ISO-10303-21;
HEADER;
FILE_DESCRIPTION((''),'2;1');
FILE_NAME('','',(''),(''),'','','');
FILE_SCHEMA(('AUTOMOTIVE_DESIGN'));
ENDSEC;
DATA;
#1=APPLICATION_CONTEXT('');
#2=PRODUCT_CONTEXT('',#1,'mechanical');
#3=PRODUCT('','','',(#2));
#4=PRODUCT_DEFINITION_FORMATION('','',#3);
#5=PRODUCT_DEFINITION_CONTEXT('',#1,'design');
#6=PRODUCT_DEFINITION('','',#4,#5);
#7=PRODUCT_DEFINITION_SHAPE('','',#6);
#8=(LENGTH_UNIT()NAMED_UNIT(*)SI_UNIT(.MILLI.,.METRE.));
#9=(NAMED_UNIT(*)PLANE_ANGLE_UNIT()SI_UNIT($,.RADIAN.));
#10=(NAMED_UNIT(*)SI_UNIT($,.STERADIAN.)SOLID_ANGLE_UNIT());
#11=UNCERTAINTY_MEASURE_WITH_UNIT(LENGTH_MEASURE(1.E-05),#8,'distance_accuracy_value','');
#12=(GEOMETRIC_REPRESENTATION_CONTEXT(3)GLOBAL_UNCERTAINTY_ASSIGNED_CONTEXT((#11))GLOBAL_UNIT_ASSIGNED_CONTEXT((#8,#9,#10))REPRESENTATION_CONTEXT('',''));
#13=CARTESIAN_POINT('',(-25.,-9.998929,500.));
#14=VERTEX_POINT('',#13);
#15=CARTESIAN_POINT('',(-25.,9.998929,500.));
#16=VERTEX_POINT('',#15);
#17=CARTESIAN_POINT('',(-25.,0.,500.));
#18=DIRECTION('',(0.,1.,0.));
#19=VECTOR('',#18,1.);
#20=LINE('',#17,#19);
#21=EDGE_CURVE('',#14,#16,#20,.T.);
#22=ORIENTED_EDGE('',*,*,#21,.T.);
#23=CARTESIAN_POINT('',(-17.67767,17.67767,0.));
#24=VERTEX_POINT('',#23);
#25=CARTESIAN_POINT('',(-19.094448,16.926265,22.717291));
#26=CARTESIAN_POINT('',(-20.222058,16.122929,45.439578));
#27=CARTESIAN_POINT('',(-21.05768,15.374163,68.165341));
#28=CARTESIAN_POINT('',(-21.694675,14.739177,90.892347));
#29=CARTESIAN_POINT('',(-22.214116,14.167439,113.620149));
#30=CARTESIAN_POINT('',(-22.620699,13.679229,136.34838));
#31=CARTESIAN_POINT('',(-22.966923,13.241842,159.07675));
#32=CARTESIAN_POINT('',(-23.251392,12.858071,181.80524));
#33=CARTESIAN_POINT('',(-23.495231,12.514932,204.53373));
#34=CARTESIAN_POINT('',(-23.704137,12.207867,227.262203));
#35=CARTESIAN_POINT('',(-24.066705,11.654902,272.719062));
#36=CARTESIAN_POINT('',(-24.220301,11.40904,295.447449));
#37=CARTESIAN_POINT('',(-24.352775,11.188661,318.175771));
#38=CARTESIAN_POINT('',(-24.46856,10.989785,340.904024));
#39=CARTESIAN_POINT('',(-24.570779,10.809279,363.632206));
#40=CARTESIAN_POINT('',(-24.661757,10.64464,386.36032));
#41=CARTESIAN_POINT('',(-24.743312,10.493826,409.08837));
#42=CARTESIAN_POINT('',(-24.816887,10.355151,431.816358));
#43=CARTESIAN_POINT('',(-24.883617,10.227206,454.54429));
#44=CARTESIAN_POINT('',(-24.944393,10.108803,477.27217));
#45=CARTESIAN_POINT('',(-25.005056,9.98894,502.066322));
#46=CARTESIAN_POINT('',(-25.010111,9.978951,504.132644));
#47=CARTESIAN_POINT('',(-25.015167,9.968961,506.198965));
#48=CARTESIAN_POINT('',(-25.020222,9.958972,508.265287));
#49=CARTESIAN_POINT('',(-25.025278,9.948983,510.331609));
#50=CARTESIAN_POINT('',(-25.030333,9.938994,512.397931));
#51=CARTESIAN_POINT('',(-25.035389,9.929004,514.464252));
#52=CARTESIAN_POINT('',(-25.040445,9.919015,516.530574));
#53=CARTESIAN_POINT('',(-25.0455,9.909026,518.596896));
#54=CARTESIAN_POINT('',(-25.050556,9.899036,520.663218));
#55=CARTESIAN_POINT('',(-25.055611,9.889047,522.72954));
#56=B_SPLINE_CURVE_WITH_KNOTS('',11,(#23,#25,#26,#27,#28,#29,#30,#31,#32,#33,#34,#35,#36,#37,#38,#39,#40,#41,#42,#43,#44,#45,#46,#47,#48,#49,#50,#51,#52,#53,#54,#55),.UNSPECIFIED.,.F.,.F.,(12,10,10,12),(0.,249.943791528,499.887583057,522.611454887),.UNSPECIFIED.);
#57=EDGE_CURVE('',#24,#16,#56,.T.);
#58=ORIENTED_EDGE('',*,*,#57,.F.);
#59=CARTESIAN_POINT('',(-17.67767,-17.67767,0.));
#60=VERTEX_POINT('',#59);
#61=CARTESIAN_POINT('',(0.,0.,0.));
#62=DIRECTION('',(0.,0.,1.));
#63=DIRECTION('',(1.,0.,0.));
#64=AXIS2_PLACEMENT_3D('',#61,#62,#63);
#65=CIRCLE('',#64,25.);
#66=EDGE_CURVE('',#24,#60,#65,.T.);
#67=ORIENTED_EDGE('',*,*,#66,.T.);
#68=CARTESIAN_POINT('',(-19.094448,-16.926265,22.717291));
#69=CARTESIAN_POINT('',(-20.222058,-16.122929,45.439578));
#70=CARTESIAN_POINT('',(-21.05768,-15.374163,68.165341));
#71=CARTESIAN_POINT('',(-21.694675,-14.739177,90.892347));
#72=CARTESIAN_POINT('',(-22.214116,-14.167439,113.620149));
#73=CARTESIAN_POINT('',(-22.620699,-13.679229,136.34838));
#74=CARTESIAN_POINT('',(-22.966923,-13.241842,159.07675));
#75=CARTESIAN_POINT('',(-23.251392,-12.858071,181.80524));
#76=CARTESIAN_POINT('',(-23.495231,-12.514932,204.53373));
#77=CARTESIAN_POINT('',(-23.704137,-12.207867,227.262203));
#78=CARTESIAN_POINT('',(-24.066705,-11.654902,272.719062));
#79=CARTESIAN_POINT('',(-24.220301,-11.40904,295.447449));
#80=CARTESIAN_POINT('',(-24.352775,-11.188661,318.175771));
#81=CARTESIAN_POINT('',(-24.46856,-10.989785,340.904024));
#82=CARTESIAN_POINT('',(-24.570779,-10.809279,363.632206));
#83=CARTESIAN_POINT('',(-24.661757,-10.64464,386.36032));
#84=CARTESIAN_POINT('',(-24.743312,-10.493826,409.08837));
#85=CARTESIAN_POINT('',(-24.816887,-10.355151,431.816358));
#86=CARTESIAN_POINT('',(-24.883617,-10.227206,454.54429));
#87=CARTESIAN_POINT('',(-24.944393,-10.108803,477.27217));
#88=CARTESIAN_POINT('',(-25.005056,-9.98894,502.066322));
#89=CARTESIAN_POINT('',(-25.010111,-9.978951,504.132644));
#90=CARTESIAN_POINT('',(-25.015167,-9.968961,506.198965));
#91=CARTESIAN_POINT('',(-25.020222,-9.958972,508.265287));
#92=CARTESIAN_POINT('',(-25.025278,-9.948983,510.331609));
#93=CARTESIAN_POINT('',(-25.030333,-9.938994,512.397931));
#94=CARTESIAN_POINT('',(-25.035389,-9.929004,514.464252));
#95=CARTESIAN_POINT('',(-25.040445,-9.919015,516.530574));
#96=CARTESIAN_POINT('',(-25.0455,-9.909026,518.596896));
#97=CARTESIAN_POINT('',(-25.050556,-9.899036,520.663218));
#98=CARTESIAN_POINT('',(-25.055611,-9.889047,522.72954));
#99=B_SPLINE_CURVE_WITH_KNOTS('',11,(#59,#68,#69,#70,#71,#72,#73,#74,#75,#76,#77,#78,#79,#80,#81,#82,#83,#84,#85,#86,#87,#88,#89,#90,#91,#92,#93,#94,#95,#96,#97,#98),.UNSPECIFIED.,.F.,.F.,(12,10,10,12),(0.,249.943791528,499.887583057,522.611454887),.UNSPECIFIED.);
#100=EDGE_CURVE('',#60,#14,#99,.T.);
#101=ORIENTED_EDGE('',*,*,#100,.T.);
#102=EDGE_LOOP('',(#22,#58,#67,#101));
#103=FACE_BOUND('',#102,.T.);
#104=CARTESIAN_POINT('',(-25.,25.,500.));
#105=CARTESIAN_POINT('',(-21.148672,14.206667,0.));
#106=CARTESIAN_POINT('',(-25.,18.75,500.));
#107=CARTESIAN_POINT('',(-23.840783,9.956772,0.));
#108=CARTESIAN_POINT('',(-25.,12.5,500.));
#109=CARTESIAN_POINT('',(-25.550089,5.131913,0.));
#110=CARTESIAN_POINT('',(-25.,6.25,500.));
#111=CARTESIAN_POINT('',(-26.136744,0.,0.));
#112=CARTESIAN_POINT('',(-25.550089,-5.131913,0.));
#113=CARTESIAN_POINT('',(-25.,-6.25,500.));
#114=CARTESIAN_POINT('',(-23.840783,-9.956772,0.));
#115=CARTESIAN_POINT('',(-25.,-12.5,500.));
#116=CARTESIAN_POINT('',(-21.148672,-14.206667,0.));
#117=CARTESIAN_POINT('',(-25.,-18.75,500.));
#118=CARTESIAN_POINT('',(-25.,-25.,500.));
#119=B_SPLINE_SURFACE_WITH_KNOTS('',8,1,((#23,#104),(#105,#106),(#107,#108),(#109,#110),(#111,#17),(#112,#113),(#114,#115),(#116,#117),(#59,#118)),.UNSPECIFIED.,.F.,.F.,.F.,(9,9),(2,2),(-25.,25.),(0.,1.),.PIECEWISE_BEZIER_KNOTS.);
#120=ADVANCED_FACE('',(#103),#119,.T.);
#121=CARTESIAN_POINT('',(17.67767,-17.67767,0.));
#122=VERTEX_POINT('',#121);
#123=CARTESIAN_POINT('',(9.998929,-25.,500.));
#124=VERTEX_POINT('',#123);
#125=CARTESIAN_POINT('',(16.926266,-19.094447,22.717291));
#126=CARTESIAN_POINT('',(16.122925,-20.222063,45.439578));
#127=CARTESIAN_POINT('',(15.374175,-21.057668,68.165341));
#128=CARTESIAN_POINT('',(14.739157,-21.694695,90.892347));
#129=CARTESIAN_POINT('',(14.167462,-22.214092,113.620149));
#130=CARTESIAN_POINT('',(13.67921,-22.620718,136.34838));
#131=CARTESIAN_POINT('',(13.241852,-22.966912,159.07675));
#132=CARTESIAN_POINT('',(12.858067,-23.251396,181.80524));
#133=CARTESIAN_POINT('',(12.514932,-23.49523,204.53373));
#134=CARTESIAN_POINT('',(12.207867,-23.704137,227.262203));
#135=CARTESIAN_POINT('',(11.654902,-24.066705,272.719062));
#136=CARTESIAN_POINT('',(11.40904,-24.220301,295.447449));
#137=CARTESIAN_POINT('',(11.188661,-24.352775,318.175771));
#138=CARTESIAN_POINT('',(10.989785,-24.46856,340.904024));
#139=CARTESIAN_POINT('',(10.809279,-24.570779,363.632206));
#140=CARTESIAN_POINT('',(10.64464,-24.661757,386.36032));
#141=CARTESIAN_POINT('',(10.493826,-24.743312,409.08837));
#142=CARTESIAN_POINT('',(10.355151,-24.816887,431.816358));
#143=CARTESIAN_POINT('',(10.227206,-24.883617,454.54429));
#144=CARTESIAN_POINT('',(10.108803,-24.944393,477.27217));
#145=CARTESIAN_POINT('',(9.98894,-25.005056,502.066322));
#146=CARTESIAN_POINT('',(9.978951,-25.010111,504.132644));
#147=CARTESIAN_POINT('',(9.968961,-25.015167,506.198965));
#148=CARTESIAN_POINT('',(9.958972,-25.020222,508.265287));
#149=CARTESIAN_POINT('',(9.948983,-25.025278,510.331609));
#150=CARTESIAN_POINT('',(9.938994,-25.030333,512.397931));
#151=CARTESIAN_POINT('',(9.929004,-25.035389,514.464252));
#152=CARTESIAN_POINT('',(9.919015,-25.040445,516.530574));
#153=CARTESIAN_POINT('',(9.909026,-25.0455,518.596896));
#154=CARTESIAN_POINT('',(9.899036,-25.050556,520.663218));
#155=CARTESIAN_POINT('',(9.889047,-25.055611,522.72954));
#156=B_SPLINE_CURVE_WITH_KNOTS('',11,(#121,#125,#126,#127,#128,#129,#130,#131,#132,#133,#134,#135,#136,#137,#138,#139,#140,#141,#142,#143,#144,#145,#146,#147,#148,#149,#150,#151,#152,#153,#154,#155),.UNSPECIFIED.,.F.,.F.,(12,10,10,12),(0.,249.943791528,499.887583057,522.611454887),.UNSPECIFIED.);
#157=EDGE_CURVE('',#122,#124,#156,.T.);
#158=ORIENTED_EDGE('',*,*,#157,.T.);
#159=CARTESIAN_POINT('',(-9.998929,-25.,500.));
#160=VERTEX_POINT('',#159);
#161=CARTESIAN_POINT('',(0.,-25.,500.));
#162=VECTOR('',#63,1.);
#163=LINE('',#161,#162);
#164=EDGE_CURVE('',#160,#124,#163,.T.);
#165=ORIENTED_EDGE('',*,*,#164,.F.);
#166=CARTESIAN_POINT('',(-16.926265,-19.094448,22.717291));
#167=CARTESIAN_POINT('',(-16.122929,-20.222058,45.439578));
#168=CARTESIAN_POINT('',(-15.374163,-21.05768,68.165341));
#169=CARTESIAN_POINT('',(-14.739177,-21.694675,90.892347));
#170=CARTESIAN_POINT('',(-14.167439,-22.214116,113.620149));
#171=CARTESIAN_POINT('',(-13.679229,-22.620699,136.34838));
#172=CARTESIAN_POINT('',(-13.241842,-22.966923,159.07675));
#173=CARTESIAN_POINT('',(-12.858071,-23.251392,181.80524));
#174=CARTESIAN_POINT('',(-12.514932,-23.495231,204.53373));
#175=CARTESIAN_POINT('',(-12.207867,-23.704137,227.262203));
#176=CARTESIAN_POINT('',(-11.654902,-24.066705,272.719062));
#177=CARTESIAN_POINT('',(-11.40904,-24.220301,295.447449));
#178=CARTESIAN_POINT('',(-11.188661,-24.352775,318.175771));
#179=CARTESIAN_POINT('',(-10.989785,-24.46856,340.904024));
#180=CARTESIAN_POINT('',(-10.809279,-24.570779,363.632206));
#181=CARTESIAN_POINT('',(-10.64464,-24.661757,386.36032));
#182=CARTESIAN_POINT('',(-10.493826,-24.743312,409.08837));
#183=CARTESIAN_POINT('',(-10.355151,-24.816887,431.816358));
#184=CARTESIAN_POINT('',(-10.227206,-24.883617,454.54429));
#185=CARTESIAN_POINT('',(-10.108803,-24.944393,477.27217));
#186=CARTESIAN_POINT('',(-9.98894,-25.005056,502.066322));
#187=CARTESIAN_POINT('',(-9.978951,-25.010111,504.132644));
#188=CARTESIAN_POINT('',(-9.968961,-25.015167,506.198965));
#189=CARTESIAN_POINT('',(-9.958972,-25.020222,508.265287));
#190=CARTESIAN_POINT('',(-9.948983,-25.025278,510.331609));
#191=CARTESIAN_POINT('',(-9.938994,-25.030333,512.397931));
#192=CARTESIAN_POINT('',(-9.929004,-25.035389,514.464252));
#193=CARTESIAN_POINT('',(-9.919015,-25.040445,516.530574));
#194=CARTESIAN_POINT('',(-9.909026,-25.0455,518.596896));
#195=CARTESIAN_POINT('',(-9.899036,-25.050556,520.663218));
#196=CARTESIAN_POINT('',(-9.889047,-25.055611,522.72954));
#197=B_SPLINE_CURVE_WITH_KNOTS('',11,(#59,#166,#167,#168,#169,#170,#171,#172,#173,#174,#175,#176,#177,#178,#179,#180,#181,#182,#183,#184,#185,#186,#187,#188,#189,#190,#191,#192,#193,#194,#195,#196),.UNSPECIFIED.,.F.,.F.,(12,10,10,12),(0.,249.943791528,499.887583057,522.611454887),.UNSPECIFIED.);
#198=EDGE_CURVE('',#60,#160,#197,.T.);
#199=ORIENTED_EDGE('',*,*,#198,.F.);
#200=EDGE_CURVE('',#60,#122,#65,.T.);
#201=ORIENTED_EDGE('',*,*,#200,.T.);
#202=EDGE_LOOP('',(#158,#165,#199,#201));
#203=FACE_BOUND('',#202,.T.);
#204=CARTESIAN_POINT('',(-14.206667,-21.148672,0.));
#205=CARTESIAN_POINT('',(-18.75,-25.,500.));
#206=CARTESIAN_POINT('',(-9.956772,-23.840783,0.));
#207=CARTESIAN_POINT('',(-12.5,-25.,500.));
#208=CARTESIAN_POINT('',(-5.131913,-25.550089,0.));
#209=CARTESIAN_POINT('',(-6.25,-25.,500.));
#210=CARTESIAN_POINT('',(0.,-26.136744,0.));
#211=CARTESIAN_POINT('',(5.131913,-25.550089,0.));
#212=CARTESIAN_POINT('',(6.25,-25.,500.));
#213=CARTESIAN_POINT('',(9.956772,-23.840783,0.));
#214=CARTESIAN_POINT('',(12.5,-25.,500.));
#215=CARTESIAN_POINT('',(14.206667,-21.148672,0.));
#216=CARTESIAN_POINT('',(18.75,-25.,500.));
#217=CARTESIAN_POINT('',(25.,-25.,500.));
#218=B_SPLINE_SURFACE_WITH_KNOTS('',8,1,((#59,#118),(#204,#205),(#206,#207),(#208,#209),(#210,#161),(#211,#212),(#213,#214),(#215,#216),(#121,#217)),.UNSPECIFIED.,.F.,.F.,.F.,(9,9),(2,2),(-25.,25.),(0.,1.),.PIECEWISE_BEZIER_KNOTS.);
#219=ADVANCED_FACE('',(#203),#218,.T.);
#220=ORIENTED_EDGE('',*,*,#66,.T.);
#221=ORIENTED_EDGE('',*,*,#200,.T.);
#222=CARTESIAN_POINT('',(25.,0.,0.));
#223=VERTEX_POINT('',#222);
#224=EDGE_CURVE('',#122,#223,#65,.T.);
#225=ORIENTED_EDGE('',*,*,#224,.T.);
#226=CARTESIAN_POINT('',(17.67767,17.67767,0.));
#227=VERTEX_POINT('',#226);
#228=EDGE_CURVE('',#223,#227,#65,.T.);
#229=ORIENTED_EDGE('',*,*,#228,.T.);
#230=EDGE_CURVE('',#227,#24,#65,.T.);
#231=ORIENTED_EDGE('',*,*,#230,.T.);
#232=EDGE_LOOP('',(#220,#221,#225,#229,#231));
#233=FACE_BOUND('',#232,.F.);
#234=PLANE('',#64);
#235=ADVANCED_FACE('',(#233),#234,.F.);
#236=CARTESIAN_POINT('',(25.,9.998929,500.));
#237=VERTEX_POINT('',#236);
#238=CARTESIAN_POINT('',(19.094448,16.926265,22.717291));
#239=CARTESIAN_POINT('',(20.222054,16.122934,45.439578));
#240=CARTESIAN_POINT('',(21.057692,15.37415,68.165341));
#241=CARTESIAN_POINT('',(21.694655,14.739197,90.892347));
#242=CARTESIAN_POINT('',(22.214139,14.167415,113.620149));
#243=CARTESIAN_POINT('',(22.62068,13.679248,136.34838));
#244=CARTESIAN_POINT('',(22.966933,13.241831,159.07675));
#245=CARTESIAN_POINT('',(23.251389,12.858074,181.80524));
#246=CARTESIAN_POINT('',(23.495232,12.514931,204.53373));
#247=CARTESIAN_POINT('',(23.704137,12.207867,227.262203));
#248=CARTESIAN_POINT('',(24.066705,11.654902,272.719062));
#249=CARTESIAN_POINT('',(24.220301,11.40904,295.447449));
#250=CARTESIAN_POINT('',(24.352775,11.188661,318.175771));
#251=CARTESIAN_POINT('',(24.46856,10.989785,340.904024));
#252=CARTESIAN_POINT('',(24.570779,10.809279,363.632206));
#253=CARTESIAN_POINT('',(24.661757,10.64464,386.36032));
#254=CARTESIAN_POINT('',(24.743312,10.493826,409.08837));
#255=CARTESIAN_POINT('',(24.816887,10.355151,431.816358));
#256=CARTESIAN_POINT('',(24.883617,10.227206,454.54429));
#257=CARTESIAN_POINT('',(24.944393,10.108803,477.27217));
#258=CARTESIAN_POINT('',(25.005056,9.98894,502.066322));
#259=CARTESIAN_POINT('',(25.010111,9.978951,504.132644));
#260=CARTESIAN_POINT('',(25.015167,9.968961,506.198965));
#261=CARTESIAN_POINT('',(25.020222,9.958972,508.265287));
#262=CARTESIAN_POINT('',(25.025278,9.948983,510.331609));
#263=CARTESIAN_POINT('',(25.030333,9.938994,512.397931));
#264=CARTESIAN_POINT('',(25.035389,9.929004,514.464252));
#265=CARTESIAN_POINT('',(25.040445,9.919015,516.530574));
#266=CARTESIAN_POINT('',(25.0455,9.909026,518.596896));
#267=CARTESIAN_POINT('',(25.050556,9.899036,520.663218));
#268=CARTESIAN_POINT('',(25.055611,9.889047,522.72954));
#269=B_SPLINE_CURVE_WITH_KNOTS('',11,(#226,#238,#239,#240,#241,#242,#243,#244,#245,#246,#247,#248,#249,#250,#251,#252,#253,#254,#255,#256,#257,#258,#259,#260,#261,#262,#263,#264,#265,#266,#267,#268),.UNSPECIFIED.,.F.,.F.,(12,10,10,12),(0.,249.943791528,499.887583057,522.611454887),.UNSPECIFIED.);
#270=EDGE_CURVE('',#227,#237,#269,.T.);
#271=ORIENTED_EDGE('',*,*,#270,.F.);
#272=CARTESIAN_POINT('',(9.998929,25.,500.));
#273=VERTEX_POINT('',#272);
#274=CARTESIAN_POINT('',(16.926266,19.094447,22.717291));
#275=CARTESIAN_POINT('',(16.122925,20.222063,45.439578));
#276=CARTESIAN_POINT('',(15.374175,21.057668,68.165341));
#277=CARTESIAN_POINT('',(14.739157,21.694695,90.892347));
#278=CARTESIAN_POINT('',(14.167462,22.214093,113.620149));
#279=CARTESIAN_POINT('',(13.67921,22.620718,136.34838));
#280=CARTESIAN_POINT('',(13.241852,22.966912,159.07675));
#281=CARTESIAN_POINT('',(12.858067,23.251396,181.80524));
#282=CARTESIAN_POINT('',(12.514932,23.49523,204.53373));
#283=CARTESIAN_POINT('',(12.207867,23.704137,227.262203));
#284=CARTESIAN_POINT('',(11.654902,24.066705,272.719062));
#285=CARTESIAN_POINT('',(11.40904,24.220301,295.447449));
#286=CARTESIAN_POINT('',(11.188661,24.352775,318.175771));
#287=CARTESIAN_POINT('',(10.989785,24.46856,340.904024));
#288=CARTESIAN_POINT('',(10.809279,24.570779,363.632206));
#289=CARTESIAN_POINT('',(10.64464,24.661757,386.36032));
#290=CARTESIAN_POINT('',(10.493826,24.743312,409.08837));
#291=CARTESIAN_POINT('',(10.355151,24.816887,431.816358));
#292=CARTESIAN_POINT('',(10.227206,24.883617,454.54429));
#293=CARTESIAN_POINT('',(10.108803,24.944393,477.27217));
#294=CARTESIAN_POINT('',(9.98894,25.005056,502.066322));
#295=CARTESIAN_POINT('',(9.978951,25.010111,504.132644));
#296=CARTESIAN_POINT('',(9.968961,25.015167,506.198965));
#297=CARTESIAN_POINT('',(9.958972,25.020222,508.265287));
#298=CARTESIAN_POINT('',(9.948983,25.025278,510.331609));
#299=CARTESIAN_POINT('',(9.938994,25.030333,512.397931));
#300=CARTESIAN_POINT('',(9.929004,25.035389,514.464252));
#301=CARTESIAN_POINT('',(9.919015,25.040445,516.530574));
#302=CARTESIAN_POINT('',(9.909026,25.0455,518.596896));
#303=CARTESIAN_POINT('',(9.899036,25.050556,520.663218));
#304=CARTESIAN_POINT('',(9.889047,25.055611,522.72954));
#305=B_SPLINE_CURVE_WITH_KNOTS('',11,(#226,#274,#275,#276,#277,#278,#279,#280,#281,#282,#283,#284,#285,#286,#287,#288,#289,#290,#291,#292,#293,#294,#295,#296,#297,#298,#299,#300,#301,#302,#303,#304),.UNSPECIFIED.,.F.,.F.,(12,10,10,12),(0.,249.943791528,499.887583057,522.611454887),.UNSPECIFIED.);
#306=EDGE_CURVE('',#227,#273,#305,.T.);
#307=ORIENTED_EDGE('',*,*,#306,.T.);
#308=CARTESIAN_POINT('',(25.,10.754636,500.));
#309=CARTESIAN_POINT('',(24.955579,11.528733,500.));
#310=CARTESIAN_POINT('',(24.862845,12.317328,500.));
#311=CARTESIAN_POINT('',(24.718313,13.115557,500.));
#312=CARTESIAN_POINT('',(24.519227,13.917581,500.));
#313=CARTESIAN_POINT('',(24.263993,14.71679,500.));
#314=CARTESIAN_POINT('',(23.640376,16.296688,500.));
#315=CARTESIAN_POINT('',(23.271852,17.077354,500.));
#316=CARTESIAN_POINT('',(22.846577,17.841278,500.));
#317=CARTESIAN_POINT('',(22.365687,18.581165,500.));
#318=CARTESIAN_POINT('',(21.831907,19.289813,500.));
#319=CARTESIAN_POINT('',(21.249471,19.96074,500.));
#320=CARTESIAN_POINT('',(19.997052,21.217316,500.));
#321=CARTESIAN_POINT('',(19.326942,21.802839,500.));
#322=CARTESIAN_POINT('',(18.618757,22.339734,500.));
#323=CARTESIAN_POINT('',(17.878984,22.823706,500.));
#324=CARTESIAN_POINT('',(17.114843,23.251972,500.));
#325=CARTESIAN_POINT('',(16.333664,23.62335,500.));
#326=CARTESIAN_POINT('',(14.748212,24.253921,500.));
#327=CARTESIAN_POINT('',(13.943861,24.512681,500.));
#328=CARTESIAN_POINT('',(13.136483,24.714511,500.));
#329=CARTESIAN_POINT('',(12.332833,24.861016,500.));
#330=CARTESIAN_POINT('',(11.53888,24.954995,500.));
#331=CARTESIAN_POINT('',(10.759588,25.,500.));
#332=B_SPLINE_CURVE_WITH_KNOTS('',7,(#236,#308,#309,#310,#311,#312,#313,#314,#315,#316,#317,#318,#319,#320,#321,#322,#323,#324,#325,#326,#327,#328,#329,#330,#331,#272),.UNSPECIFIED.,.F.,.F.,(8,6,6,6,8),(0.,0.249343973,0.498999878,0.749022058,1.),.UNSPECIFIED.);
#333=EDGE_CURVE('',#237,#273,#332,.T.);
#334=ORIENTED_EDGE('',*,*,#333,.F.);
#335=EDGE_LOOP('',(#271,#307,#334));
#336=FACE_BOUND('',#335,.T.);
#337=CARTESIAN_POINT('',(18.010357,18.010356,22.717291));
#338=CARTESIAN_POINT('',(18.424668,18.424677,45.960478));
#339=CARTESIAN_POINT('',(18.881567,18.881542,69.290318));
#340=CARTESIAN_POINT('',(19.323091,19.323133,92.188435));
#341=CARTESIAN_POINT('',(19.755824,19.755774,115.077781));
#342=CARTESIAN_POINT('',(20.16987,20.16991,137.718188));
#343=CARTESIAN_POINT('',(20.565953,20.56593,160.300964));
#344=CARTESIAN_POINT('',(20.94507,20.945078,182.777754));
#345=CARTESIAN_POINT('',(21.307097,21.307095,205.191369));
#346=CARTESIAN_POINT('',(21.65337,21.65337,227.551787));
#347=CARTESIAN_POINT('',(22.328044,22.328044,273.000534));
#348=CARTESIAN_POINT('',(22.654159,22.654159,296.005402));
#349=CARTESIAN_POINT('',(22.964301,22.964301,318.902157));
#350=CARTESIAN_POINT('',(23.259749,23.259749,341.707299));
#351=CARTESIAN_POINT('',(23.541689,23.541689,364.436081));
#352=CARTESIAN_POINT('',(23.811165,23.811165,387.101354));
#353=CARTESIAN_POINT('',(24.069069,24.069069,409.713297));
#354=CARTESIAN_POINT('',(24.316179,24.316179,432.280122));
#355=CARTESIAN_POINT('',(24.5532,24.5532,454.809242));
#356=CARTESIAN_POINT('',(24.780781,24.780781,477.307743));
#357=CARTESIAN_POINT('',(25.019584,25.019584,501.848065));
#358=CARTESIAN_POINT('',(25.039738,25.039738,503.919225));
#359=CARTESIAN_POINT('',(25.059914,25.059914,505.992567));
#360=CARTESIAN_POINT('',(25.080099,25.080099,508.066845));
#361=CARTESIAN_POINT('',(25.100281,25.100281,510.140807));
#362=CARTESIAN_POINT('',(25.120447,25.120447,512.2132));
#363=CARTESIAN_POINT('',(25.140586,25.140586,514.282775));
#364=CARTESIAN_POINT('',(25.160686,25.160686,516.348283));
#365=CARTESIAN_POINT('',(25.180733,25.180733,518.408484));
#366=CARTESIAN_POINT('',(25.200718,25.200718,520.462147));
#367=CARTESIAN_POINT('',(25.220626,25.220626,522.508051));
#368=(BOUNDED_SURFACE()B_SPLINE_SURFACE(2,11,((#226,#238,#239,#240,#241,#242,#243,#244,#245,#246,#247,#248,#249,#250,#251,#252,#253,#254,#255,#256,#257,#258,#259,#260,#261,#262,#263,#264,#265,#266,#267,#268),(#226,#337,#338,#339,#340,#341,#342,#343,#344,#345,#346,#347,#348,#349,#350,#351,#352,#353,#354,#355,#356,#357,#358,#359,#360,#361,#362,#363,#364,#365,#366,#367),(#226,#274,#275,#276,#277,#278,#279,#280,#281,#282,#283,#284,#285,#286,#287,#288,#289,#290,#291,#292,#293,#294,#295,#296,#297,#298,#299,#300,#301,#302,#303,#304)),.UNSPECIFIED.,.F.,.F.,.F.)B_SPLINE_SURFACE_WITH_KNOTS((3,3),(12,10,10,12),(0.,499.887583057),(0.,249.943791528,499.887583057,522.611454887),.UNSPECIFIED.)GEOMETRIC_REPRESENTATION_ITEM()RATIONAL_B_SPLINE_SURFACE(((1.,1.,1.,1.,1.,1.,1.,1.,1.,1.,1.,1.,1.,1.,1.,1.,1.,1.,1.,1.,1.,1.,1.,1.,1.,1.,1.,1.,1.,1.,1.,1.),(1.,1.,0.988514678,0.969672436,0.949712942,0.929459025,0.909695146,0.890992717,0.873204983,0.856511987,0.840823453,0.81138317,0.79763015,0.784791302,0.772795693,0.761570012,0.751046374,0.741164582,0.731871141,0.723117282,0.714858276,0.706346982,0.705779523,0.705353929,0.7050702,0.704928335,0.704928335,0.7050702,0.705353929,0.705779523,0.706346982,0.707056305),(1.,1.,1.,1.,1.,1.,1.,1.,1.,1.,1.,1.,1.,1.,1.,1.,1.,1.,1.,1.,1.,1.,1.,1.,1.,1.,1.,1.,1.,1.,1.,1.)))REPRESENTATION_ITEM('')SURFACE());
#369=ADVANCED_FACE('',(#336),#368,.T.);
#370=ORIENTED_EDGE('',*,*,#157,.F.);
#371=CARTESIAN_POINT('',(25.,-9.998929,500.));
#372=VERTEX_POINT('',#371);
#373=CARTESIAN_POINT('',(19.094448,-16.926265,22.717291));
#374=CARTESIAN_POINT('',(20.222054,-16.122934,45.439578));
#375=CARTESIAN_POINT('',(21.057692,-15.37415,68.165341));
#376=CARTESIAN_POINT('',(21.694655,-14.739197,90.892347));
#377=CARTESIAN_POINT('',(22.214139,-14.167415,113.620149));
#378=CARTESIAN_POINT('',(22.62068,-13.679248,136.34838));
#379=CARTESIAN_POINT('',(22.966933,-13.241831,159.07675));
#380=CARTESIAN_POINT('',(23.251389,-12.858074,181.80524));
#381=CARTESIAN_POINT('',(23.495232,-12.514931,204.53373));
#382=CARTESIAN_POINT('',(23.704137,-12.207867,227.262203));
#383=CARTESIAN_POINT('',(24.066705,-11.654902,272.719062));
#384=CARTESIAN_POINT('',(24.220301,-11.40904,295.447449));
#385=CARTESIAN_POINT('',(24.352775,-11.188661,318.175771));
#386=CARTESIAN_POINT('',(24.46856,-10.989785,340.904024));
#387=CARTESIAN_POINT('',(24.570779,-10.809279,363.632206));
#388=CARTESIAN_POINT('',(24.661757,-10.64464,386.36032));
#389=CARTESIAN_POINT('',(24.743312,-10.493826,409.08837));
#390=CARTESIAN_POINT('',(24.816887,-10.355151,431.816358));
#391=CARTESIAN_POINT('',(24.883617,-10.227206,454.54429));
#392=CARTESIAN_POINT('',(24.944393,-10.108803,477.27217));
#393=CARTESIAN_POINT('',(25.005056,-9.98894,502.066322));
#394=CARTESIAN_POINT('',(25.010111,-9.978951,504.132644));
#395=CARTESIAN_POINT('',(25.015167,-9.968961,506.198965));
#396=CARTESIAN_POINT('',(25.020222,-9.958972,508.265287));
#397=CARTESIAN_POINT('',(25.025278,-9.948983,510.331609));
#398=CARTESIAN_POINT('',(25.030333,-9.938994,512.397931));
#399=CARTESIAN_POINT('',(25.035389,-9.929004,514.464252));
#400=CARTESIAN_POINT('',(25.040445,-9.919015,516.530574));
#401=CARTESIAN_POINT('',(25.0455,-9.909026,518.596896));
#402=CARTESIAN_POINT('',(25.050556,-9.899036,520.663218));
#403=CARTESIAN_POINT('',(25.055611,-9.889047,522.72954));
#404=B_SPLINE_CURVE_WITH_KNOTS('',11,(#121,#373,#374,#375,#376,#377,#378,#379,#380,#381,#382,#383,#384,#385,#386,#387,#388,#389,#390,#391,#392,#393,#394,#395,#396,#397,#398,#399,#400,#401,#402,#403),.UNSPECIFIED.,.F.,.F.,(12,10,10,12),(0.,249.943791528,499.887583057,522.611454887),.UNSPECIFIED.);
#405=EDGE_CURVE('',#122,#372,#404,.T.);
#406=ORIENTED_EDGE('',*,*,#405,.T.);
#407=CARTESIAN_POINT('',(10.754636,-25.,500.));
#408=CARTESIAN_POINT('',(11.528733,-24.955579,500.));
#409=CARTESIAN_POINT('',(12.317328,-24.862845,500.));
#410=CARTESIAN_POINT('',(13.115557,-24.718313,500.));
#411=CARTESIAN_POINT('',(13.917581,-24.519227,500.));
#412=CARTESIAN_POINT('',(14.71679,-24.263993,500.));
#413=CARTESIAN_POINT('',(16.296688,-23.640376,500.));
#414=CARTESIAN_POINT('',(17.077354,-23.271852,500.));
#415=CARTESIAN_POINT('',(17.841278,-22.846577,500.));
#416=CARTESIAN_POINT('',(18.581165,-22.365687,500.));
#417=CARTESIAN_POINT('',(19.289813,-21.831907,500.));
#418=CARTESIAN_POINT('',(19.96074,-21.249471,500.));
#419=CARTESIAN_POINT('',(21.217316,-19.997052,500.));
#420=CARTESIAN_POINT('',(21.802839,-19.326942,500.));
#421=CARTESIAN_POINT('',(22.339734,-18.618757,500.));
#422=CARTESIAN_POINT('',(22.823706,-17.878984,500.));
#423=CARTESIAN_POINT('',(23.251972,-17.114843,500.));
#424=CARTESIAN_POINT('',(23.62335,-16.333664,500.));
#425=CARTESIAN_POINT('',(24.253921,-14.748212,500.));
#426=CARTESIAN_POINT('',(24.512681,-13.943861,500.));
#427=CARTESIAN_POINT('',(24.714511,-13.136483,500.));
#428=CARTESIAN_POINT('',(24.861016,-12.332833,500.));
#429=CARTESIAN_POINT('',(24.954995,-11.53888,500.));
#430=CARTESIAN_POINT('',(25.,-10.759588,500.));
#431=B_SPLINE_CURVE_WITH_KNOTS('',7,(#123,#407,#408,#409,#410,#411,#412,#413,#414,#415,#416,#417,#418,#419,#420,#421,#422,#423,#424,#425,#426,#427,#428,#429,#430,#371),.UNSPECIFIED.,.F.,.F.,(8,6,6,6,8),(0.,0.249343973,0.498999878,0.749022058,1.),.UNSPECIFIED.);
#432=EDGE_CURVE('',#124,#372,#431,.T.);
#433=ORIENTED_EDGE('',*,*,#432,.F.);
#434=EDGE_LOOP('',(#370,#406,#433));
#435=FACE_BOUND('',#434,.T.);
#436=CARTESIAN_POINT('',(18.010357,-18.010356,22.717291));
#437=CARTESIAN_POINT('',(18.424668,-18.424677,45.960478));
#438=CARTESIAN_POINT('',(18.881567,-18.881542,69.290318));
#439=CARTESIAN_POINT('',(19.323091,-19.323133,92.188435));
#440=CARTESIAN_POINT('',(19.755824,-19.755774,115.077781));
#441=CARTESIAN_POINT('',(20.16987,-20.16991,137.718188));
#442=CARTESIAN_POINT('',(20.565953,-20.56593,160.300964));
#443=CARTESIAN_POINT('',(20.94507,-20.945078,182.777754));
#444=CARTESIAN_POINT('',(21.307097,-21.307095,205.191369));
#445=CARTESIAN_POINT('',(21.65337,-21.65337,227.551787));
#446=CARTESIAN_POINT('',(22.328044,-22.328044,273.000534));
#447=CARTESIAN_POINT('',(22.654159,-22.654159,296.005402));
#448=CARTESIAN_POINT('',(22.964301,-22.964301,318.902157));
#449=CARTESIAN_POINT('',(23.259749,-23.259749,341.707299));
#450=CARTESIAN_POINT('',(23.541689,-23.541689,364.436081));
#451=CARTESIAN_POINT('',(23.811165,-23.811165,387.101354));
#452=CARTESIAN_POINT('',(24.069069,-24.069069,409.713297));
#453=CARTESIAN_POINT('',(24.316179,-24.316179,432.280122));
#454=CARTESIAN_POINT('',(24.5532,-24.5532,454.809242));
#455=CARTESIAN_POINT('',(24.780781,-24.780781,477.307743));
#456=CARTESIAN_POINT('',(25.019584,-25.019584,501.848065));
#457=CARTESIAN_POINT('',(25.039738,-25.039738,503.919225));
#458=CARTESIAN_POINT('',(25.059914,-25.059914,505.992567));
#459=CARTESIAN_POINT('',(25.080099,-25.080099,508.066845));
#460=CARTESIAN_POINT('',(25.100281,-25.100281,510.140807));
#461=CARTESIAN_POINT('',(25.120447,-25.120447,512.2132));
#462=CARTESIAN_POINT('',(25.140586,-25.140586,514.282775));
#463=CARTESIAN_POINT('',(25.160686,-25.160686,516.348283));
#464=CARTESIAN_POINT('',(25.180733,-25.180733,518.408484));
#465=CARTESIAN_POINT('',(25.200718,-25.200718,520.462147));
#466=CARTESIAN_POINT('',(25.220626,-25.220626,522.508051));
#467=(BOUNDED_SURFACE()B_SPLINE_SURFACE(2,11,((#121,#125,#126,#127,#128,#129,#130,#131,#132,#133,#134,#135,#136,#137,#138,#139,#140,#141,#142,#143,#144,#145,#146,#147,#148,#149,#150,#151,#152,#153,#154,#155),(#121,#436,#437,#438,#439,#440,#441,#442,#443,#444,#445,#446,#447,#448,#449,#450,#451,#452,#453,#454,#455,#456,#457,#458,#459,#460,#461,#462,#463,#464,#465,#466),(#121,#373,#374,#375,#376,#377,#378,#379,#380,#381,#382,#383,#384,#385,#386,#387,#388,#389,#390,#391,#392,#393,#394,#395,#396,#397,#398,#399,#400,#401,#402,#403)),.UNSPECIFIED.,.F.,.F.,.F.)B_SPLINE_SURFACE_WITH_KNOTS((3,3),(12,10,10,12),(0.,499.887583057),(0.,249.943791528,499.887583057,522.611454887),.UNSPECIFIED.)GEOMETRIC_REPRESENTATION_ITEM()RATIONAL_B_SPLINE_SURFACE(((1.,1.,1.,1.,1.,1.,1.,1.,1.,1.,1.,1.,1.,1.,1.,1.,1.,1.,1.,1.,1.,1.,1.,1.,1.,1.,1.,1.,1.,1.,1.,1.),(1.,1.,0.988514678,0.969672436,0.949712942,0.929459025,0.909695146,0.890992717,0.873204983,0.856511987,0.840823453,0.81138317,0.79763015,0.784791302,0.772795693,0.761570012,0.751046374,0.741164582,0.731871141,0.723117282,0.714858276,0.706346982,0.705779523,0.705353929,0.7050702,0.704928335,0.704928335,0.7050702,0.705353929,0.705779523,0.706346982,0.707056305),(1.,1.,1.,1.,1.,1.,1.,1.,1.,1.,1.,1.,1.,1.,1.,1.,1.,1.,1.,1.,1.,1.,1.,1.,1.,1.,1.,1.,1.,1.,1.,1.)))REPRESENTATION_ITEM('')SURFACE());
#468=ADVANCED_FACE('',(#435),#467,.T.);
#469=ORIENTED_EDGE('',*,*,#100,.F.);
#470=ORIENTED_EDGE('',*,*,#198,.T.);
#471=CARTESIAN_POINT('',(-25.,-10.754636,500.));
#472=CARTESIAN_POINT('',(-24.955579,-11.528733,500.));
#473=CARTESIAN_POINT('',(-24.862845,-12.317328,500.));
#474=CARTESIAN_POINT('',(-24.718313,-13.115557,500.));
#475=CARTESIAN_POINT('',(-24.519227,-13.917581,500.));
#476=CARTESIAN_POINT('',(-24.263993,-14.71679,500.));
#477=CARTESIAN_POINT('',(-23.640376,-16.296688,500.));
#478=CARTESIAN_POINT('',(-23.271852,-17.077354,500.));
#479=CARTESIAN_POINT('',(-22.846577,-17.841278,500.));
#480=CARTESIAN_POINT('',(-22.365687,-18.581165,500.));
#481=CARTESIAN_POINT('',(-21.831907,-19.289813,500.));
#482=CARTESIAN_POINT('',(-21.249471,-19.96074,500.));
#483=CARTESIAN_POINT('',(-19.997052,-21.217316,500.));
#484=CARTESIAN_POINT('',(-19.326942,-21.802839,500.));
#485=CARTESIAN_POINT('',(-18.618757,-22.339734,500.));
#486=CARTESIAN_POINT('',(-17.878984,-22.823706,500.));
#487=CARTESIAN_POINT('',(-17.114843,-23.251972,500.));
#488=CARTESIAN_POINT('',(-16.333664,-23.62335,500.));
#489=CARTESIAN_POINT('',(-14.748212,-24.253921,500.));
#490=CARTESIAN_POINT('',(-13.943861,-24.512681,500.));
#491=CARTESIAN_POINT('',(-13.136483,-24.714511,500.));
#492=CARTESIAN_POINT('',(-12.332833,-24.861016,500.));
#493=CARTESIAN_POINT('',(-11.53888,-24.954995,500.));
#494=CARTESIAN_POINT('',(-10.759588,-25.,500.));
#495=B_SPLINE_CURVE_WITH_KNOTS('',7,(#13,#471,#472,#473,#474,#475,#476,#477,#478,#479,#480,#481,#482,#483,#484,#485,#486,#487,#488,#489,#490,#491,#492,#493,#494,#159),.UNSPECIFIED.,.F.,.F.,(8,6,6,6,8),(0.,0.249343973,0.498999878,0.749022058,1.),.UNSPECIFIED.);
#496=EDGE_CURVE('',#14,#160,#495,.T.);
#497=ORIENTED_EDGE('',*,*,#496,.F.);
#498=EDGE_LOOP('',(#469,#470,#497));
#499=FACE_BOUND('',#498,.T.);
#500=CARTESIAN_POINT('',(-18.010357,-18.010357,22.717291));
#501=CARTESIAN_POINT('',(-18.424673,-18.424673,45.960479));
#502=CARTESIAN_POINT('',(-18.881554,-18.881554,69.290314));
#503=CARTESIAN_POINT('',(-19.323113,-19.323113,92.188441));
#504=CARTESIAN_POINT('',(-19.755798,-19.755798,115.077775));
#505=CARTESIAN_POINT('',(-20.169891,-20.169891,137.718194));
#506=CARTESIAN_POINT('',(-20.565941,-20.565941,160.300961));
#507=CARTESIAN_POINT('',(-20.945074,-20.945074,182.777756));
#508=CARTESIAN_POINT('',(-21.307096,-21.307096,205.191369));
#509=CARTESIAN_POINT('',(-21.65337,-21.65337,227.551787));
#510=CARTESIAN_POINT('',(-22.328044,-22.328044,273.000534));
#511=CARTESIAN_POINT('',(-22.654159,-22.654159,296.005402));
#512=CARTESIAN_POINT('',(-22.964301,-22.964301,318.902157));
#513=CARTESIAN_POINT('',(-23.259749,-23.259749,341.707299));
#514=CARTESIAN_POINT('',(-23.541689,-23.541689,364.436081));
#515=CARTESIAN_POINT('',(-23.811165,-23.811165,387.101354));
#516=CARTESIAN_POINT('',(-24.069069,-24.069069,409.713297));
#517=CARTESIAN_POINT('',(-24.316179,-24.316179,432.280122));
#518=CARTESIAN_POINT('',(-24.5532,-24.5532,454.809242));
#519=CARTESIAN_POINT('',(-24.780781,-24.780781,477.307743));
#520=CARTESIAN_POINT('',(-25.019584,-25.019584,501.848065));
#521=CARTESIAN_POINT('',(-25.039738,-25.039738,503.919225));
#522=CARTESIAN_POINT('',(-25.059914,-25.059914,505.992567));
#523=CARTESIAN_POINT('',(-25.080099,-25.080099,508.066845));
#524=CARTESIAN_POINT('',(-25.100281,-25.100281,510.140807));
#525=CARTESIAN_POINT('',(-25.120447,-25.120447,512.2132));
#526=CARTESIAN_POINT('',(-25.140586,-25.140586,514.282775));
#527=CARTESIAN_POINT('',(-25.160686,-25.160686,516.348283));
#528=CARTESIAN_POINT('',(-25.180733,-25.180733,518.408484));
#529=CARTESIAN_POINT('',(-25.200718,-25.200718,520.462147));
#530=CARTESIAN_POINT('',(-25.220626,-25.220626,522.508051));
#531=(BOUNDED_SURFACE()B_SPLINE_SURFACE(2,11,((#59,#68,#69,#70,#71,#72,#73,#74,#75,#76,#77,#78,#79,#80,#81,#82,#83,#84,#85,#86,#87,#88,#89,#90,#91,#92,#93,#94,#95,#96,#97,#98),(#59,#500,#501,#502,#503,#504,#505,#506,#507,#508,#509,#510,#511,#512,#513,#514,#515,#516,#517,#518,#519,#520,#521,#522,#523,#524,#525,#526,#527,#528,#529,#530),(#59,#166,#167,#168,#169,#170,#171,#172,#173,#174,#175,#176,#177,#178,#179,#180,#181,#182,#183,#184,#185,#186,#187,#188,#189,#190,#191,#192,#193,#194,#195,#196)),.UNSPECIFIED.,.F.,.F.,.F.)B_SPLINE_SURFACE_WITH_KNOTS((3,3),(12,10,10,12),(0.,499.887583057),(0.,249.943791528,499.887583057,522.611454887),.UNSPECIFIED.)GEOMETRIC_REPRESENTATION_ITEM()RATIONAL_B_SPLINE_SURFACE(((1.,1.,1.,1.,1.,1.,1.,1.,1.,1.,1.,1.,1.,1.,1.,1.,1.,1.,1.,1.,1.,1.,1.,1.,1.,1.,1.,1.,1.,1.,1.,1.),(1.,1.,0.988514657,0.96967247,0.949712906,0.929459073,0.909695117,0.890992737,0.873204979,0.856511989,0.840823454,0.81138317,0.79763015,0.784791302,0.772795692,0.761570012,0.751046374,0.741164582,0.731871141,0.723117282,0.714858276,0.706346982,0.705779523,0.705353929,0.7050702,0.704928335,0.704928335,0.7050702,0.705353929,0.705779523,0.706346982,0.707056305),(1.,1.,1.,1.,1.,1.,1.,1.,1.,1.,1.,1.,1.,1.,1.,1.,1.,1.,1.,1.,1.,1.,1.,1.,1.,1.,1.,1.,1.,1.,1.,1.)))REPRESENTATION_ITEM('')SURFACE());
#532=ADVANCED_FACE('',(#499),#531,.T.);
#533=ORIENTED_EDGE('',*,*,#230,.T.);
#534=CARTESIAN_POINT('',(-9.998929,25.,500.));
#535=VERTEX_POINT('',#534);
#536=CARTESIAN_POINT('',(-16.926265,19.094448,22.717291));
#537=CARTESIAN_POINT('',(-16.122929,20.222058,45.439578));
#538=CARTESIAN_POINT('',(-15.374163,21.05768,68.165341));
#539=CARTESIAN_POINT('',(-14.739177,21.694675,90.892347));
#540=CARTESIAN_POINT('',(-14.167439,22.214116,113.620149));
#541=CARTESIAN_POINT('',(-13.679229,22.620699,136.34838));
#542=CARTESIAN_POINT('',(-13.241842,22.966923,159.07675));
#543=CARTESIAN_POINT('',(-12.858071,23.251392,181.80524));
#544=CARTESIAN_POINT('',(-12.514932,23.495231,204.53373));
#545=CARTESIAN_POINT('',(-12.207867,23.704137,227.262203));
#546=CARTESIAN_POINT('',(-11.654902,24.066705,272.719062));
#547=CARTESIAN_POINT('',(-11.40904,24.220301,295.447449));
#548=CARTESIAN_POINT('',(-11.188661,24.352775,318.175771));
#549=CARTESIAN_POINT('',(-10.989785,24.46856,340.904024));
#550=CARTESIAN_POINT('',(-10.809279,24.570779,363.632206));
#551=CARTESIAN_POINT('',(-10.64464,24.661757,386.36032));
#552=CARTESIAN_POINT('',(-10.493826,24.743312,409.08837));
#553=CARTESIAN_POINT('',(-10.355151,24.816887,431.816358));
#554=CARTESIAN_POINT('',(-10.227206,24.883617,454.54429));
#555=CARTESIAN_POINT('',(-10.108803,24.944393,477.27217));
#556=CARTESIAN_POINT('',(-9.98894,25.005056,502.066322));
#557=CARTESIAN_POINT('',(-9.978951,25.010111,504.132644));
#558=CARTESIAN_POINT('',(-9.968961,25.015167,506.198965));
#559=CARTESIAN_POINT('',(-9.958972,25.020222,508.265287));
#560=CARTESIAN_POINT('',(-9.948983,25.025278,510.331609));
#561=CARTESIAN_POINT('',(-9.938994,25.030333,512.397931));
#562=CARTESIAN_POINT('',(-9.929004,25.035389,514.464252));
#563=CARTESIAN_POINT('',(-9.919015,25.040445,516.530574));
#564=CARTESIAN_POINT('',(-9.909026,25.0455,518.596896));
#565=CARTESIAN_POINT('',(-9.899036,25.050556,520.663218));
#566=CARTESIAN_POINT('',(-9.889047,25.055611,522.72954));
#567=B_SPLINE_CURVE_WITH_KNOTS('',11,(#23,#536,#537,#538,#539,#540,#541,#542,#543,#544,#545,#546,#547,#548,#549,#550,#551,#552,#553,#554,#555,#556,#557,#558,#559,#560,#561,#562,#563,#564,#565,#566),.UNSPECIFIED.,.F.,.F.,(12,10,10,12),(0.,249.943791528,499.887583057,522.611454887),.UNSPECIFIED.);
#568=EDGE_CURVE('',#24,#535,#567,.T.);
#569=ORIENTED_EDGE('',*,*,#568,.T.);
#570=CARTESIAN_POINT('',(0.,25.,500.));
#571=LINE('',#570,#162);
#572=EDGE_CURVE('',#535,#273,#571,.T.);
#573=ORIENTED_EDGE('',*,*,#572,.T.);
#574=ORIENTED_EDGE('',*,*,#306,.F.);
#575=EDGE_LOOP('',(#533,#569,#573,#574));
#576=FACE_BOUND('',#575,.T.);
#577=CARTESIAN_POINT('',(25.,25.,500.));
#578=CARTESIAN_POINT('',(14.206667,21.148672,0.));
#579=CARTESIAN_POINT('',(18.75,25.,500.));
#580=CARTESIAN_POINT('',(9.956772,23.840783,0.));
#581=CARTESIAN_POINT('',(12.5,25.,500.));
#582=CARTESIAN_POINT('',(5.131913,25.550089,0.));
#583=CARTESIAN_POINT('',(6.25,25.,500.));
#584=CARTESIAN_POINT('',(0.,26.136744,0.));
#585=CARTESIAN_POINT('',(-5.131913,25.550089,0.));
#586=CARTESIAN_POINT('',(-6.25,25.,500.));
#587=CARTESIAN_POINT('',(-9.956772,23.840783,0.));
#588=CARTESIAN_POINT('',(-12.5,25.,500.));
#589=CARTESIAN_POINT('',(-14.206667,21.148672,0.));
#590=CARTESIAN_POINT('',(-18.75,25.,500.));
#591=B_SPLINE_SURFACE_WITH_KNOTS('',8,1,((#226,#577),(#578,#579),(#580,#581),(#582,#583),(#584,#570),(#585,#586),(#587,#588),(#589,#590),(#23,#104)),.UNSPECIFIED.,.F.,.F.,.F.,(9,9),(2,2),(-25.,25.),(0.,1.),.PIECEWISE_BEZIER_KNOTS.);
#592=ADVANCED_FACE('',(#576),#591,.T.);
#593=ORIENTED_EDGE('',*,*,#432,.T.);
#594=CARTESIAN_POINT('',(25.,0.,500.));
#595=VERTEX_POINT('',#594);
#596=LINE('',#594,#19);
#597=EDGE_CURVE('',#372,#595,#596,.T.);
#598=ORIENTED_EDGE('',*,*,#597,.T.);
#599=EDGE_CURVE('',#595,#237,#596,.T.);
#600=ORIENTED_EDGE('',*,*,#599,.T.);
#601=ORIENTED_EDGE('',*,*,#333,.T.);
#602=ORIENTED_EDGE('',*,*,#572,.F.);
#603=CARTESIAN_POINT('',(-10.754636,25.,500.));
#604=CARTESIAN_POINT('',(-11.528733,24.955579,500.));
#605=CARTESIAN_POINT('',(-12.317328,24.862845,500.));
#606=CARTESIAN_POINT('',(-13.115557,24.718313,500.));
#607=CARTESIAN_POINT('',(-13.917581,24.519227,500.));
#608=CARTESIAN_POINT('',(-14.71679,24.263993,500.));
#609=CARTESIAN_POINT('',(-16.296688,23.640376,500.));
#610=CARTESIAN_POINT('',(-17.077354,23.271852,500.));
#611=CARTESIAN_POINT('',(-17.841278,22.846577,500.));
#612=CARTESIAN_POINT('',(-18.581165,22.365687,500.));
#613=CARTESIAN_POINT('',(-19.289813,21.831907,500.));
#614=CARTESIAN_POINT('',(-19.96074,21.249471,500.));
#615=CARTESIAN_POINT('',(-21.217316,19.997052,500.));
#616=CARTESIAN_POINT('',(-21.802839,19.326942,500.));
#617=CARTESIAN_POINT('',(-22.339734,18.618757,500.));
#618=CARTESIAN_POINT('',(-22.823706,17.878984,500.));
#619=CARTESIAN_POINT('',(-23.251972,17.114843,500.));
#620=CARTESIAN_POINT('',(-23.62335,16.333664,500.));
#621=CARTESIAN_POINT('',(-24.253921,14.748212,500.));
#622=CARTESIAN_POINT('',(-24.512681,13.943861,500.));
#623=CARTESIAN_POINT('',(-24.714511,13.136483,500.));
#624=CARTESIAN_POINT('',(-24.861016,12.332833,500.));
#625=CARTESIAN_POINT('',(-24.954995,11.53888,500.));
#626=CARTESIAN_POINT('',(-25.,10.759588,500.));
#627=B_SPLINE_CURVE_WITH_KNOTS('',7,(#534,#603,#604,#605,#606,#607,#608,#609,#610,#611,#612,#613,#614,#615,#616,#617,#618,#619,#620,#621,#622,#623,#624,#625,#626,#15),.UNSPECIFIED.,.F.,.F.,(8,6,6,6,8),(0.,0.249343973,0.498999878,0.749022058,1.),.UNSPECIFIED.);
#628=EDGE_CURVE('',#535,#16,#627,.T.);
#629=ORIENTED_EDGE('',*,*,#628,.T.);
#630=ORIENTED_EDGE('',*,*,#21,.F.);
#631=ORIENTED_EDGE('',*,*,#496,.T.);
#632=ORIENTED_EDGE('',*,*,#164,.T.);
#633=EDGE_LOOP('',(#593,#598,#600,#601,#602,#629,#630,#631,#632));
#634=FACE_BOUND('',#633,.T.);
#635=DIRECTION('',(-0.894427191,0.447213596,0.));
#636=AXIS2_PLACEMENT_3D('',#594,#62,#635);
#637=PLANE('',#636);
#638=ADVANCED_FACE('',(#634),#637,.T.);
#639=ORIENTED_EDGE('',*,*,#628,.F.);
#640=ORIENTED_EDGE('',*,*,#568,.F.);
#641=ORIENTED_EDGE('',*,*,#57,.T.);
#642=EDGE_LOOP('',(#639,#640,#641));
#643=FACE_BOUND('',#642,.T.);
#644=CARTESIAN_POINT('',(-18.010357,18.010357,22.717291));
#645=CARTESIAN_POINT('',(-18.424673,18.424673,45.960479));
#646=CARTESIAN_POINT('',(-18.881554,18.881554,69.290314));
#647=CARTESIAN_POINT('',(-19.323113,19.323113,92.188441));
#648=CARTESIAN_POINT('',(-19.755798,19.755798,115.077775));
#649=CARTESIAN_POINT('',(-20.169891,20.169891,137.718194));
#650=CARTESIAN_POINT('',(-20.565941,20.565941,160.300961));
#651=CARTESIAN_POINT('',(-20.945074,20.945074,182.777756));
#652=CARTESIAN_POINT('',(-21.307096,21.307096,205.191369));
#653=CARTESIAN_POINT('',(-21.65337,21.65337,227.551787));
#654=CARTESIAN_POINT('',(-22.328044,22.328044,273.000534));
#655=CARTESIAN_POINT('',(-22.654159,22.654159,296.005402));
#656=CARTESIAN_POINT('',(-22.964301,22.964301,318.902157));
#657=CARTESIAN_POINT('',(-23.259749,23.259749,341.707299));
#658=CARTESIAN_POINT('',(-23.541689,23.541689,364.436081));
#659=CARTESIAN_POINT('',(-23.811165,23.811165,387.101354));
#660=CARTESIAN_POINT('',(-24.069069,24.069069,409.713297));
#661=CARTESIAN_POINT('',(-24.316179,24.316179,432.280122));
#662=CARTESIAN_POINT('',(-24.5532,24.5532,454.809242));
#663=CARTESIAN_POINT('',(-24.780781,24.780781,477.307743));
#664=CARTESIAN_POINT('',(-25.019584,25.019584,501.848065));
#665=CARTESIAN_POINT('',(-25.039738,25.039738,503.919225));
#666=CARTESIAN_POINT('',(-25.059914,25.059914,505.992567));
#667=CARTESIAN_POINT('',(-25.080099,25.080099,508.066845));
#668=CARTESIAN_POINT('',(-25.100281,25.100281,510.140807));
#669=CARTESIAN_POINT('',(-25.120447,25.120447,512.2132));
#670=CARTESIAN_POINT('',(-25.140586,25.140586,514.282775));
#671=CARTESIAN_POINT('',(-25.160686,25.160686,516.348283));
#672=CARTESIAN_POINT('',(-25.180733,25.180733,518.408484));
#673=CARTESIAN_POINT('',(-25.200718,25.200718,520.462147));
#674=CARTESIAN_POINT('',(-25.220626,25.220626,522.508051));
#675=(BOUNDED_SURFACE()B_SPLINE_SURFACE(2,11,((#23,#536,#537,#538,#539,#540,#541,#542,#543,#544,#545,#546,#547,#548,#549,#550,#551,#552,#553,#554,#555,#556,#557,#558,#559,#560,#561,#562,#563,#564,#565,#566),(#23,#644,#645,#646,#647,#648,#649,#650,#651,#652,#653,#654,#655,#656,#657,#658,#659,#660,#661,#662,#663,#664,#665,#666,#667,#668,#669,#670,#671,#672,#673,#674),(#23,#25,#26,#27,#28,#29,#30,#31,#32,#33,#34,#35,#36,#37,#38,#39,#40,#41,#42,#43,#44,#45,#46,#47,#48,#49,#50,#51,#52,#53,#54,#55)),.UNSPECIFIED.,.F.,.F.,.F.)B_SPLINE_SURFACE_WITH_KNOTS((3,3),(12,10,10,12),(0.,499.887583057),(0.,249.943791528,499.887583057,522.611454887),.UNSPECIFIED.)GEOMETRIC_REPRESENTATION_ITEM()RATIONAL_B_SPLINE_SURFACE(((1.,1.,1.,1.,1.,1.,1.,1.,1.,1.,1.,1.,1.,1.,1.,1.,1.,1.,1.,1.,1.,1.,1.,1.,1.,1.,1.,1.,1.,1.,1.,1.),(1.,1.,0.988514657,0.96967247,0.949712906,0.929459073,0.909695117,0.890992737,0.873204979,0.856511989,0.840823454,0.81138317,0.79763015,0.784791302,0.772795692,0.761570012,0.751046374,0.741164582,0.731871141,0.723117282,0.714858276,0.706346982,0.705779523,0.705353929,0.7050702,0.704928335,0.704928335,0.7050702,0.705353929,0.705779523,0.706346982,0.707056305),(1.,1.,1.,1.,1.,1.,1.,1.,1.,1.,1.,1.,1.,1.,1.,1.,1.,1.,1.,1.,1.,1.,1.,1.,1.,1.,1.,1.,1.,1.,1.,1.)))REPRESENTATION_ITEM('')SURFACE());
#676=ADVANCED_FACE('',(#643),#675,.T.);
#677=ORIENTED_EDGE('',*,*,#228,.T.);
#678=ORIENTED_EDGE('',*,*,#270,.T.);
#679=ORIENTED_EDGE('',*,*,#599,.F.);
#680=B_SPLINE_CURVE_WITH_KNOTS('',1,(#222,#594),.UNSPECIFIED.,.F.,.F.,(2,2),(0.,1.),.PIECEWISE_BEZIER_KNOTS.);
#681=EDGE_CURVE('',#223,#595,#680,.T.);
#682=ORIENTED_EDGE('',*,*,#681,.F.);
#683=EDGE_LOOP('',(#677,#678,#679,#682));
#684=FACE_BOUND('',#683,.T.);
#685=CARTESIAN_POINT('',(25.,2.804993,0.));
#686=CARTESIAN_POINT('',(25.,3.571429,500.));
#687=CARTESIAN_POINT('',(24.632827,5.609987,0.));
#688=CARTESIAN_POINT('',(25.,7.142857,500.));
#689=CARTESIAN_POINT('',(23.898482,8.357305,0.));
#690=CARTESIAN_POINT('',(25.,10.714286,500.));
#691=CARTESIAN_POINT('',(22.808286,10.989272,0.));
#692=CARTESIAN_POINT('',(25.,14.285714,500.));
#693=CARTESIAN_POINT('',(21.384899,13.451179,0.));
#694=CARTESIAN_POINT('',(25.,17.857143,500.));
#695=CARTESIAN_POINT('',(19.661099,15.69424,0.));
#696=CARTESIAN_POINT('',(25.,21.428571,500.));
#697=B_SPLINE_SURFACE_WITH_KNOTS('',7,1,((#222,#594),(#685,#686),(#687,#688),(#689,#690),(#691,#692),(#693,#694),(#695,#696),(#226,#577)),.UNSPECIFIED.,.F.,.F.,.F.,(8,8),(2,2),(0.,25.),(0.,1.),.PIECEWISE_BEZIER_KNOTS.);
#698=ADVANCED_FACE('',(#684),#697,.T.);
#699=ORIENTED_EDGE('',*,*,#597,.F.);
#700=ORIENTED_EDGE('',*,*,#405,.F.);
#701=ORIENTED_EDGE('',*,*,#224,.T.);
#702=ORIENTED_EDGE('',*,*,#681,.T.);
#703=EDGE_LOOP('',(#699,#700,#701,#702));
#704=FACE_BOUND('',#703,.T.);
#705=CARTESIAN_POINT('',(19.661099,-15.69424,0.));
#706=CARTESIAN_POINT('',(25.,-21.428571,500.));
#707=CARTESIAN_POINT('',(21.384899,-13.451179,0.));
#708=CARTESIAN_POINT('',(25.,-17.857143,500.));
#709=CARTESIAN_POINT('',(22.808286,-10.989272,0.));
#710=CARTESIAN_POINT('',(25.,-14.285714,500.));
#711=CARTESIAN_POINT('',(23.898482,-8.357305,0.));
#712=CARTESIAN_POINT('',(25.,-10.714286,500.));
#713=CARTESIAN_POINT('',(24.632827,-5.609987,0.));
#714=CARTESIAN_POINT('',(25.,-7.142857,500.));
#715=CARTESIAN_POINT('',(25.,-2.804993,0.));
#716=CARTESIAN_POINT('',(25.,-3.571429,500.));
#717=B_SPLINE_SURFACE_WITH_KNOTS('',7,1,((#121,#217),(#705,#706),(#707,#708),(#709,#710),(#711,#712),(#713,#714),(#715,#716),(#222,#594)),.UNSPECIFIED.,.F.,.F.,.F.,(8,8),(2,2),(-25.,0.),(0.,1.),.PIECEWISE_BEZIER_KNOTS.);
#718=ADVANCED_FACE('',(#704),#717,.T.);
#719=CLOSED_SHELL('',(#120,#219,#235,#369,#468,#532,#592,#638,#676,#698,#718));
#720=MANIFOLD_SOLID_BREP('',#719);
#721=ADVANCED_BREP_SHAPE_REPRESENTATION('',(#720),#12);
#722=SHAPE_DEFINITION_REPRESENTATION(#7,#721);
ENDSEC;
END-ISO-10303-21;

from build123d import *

# Parameters (mm, degrees)
F0_R = 25
F2_W = 50
F2_H = 50
F4_R = 15


with BuildPart() as f3:
    # F0 (on Top) → F3 section 0
    with BuildSketch(Plane.XY):
        Circle(F0_R)
    # F2 (on offset) → F3 section 1
    with BuildSketch(Plane.XY.offset(500)):
        Rectangle(F2_W, F2_H)
    loft()

    # F4
    f4_edges = [f3.edges().sort_by_distance(p)[0] for p in [
        (21.338835, 21.338835, 250),
        (-21.338835, 21.338835, 250),
        (-21.338835, -21.338835, 250),
        (21.338835, -21.338835, 250),
    ]]
    fillet(f4_edges, radius=F4_R)


solid = f3.part
